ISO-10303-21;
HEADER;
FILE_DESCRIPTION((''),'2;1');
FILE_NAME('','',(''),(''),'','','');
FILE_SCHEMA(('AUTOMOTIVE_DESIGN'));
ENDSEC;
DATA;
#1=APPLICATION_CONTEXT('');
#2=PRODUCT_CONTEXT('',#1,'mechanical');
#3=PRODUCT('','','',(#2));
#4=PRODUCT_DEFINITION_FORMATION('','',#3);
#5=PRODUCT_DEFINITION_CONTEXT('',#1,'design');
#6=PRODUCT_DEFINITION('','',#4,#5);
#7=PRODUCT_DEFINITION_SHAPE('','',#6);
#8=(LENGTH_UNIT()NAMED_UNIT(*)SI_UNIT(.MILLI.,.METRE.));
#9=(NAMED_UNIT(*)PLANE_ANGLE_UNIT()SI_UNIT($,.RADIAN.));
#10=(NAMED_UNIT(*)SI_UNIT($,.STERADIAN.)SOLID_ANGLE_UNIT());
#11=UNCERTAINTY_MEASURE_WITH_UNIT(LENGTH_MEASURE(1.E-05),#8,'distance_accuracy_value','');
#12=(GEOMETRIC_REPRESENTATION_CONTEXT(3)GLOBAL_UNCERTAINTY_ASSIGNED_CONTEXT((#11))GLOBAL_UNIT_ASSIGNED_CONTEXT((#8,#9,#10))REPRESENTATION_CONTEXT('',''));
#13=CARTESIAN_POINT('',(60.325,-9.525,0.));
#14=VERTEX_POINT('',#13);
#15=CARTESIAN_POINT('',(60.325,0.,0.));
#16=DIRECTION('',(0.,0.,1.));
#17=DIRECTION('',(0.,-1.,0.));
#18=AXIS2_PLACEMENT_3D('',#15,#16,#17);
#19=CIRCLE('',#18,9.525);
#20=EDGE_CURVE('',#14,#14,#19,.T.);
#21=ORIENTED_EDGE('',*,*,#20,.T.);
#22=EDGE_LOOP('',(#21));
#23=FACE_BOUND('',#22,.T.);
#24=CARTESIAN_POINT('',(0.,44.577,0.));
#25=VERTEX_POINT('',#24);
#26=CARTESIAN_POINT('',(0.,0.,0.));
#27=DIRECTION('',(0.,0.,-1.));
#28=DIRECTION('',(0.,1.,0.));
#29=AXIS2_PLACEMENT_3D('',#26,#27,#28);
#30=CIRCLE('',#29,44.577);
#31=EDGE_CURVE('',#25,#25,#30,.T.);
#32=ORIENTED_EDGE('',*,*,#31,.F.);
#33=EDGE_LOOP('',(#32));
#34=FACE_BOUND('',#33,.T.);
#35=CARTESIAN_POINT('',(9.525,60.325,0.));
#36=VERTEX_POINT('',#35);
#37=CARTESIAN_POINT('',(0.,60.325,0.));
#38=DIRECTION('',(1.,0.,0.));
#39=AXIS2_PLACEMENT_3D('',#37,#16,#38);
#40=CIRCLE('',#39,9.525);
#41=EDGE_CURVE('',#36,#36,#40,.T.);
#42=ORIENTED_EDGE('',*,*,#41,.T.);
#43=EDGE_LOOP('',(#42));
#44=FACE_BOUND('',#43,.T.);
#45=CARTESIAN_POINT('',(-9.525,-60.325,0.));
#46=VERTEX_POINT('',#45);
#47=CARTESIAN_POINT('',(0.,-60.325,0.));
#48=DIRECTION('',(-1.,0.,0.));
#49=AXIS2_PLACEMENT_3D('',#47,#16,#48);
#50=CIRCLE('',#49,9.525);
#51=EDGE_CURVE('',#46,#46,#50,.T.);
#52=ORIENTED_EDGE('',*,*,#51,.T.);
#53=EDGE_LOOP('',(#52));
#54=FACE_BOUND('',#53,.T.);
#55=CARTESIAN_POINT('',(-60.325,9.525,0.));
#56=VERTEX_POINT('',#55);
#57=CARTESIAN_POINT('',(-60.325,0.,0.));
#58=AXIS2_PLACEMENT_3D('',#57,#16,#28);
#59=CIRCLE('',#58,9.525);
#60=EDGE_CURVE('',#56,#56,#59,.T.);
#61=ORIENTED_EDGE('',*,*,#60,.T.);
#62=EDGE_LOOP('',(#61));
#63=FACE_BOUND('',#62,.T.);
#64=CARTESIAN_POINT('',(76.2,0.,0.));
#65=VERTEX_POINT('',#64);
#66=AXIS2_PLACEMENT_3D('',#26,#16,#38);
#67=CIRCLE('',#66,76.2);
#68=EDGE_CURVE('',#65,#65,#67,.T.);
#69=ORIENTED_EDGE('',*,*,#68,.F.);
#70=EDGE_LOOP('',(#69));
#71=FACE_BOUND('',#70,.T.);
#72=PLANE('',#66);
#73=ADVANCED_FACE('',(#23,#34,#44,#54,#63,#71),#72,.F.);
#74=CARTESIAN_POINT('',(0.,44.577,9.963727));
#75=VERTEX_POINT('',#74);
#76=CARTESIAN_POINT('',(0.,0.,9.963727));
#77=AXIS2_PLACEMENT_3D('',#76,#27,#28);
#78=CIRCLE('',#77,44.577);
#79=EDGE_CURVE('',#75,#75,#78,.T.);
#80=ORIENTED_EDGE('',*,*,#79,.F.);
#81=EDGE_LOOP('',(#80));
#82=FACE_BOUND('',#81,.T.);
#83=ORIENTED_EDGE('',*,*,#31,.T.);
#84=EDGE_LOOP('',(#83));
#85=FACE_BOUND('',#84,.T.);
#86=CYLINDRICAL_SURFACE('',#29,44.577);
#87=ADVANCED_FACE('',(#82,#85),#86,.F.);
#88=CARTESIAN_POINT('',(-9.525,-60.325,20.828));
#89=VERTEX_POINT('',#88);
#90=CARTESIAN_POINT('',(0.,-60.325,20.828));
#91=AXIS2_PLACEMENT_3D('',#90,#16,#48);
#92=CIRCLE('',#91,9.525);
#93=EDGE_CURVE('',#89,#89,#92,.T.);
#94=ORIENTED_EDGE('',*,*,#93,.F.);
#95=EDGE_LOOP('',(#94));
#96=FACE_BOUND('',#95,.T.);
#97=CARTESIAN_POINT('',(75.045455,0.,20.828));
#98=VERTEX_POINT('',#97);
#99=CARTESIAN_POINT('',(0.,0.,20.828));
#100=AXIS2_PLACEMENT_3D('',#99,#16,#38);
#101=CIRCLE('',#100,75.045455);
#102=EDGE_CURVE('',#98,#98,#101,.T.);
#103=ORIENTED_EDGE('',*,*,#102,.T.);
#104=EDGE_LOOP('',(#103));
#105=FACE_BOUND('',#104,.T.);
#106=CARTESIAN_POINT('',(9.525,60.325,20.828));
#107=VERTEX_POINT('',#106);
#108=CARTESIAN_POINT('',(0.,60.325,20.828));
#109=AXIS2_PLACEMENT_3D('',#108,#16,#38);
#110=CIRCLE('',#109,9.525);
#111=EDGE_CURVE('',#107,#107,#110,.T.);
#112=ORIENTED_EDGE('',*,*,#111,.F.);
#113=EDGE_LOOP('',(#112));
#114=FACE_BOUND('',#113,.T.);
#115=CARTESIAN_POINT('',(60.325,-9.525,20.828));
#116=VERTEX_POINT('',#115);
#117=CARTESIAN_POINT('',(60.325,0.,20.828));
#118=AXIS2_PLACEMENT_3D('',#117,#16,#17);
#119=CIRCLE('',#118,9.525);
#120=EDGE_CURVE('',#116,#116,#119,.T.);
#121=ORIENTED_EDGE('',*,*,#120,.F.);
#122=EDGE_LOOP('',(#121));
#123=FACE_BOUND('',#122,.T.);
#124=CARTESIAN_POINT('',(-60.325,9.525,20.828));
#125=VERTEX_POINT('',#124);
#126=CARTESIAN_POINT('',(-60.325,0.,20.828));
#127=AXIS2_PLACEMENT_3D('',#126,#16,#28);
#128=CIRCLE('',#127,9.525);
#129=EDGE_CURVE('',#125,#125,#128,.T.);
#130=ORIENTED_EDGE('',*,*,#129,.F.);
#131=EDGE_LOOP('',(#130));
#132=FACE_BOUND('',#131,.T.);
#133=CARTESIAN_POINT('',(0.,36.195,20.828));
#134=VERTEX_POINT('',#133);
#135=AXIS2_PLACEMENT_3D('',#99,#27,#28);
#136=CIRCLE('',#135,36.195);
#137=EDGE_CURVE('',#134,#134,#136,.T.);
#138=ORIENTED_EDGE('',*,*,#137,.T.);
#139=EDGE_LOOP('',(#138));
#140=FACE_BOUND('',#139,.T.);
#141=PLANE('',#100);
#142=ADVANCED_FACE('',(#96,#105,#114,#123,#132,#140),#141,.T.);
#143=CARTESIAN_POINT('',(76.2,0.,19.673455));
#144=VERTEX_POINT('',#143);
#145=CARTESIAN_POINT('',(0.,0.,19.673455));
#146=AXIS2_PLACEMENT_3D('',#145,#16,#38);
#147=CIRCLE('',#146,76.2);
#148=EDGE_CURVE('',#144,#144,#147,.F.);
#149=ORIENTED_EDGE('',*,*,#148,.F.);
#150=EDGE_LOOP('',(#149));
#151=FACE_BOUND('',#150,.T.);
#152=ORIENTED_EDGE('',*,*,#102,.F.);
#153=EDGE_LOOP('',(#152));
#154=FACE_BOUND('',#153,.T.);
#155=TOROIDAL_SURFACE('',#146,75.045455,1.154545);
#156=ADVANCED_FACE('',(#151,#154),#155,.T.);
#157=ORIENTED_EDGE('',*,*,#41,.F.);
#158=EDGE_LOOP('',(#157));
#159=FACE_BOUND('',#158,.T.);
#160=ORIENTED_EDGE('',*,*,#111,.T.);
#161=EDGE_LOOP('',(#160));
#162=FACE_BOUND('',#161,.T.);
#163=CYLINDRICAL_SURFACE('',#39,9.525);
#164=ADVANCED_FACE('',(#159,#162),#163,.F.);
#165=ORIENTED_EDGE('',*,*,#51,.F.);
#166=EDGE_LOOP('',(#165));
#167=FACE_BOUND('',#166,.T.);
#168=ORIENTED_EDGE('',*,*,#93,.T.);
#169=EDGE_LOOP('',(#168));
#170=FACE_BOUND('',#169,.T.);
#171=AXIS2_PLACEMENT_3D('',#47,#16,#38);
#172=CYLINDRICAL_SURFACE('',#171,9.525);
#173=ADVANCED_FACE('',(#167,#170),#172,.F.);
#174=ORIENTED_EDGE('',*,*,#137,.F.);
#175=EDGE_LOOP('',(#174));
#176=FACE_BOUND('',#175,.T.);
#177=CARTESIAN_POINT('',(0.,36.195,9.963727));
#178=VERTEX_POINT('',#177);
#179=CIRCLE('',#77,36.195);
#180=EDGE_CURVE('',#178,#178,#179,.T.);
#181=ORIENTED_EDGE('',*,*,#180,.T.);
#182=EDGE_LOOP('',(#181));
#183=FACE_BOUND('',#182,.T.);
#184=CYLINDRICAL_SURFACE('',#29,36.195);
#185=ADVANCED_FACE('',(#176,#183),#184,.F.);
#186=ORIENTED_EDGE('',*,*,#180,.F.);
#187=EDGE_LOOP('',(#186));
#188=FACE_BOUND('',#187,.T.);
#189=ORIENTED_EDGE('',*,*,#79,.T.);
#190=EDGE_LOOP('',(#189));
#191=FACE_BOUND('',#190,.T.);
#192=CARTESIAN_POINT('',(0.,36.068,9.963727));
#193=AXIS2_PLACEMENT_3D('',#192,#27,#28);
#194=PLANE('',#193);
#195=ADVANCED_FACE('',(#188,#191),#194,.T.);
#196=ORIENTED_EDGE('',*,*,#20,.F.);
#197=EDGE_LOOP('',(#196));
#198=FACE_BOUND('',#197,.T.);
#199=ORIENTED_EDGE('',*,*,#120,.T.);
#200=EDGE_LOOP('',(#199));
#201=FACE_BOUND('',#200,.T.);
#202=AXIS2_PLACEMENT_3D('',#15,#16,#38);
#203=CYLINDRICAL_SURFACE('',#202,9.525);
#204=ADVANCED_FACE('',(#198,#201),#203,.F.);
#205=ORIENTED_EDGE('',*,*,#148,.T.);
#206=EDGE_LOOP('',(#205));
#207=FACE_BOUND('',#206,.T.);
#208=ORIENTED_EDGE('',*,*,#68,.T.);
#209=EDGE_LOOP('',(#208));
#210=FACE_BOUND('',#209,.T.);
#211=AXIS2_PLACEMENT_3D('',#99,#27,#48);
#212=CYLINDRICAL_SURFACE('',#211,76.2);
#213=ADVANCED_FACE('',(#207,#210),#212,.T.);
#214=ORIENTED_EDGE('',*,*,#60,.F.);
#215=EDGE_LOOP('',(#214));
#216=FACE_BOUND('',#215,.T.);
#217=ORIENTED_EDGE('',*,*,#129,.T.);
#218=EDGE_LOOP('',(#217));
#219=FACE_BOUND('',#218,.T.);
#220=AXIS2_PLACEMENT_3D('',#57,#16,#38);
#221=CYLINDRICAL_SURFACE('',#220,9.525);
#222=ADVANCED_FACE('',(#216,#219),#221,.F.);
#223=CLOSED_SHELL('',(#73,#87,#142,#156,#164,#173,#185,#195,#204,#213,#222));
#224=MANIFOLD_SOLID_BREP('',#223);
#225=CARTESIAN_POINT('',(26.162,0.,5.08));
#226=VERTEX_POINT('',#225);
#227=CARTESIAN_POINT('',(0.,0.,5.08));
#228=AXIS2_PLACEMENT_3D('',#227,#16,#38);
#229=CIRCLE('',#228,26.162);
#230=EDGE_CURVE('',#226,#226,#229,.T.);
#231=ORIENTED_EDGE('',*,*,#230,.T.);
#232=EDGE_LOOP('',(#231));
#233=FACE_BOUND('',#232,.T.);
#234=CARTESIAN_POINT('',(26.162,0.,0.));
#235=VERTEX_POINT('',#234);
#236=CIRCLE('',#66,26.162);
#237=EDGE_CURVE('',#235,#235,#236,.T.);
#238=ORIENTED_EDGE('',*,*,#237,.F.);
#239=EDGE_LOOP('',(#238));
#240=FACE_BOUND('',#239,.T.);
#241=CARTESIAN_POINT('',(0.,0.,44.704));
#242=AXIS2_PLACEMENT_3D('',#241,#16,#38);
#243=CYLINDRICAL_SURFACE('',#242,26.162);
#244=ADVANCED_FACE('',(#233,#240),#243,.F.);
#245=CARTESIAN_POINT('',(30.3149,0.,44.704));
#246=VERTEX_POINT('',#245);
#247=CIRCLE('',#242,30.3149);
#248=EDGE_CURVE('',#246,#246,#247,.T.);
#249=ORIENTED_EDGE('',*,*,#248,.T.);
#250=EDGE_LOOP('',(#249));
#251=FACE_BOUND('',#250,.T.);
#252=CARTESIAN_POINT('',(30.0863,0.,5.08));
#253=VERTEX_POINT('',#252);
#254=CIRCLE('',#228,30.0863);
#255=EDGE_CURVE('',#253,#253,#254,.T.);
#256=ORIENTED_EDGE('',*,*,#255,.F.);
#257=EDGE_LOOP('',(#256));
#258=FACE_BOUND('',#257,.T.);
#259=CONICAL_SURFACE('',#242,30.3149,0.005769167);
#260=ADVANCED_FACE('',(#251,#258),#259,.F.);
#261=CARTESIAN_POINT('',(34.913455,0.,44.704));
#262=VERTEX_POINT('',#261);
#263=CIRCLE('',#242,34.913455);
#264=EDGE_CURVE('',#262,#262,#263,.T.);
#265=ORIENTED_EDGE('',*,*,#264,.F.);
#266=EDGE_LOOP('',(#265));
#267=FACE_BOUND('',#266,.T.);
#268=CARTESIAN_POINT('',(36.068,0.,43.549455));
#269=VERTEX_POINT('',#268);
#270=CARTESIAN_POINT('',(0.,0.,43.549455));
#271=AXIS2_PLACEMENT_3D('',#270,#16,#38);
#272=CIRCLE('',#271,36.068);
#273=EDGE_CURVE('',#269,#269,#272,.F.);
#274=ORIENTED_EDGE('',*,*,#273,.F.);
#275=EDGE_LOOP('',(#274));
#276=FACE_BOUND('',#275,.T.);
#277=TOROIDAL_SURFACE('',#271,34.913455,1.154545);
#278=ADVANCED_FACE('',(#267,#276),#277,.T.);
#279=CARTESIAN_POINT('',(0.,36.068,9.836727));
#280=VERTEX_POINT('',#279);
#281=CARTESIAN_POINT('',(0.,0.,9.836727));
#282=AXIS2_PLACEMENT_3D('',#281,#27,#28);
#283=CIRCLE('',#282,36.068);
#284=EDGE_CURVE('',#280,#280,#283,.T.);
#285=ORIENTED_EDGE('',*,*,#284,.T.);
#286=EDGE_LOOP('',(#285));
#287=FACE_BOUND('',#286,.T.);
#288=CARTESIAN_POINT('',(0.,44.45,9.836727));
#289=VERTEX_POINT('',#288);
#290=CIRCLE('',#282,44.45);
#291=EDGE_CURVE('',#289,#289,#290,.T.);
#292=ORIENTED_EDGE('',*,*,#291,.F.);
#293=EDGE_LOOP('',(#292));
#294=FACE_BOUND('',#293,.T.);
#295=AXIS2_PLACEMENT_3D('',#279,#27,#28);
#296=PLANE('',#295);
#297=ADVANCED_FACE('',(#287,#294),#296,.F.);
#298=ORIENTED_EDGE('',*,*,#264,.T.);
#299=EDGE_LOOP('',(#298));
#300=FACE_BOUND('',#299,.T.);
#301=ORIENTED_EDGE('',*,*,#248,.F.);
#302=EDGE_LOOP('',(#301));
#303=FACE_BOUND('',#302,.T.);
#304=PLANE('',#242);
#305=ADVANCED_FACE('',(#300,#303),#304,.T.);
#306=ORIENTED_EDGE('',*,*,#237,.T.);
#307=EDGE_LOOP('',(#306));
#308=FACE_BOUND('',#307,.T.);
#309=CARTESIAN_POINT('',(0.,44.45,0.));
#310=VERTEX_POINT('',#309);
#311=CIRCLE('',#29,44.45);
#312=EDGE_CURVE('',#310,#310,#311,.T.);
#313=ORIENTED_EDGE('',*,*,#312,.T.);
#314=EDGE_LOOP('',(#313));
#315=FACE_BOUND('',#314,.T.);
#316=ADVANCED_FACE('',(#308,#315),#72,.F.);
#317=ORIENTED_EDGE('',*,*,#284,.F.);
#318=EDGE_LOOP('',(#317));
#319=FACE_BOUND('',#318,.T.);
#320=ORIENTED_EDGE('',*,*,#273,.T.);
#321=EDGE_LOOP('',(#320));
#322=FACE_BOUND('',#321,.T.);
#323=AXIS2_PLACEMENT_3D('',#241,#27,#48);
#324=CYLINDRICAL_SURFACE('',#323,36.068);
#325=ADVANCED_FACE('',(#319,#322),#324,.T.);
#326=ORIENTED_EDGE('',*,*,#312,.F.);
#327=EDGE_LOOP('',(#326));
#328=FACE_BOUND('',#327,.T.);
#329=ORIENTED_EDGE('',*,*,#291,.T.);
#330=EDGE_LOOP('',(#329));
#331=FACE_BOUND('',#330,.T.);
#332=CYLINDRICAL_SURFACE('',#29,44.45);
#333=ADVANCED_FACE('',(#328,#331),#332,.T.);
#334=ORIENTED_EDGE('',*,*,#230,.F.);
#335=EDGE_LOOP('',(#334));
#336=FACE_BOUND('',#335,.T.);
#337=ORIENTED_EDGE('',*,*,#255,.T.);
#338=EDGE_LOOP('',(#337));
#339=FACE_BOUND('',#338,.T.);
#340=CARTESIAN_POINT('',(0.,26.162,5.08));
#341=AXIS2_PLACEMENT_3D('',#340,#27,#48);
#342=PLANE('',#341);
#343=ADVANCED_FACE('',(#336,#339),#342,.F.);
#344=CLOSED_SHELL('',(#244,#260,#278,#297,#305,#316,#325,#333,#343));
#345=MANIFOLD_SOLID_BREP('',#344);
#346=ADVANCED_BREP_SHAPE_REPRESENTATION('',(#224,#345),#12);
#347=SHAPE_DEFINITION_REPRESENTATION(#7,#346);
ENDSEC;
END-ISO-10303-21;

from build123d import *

# Parameters (mm, degrees)
SKETCH1_R                       = 76.2
EXTRUDE1_DEPTH                  = 20.828
SKETCH2_R                       = 36.068
EXTRUDE2_DEPTH                  = 23.876
SKETCH3_R                       = 9.525
EXTRUDE3_DEPTH                  = 111.376371457
CIRPATTERN1_COUNT               = 4
FILLET1_R                       = 1.154545455
CUT_REVOLVE_THIN1_OUTLINE_R     = 44.577
CUT_REVOLVE_THIN1_OUTLINE_R_2   = 44.45
CUT_REVOLVE_THIN1_DEPTH         = 9.963727273
CUT_REVOLVE_THIN1_START         = 9.836727273
CUT_REVOLVE_THIN1_2_OUTLINE_R   = 36.195
CUT_REVOLVE_THIN1_2_OUTLINE_R_2 = 36.068
CUT_REVOLVE_THIN1_2_DEPTH       = 10.991272727
CUT_REVOLVE_THIN1_3_OUTLINE_R   = 44.45
CUT_REVOLVE_THIN1_3_OUTLINE_R_2 = 36.195
CUT_REVOLVE_THIN1_3_DEPTH       = 0.127


# Read off the part's stored shape, not the designer's step: Cut-Revolve-Thin1
with BuildPart() as part:
    # Sketch1 → Extrude1 (new body)
    with BuildSketch(Plane.XY):
        Circle(SKETCH1_R)
    extrude(amount=EXTRUDE1_DEPTH)

    # Sketch2 → Extrude2 (add)
    with BuildSketch(Plane.XY.offset(20.828)):
        Circle(SKETCH2_R)
    extrude(amount=EXTRUDE2_DEPTH)

    # Sketch3 → Extrude3 (cut, through all)
    with BuildSketch(Plane.XY.offset(20.828)):
        with Locations((0, 60.325)):
            Circle(SKETCH3_R)
    extrude3 = extrude(amount=-EXTRUDE3_DEPTH, mode=Mode.SUBTRACT)

    # CirPattern1: Extrude3 ×4 about axis
    cirpattern1_axis = Axis((0, 0, 0), (0, 0, 1))
    for i in range(1, CIRPATTERN1_COUNT):
        add(extrude3.rotate(cirpattern1_axis, i * 360 / CIRPATTERN1_COUNT), mode=Mode.SUBTRACT)

    # Fillet1
    fillet1_edges = [part.edges().sort_by_distance(p)[0] for p in [
        (-76.2, 0, 20.828),
        (-36.068, 0, 44.704),
    ]]
    fillet(fillet1_edges, radius=FILLET1_R)

    # Sketch4 → Cut-Revolve1 (revolve, cut)
    with BuildSketch(Plane(origin=(0, 0, 62.70625), x_dir=(0, 0, 1), z_dir=(-1, 0, 0)), mode=Mode.PRIVATE) as cut_revolve1_sk:
        Polygon((-62.70625, 26.162), (-57.62625, 26.162), (-57.62625, 30.0863), (-18.00225, 30.3149), (-18.00225, 0), (-62.70625, 0), align=None)
    revolve(cut_revolve1_sk.sketch.rotate(Axis((0, 0, 44.704), (0, 0, -1)), 90), axis=Axis((0, 0, 44.704), (0, 0, -1)), mode=Mode.SUBTRACT)

    # Cut-Revolve-Thin1 outline → Cut-Revolve-Thin1 (cut)
    with BuildSketch(Plane.XY):
        Circle(CUT_REVOLVE_THIN1_OUTLINE_R)
        Circle(CUT_REVOLVE_THIN1_OUTLINE_R_2, mode=Mode.SUBTRACT)
    extrude(amount=CUT_REVOLVE_THIN1_DEPTH, mode=Mode.SUBTRACT)

    # Cut-Revolve-Thin1 2 outline → Cut-Revolve-Thin1 2 (cut)
    with BuildSketch(Plane.XY.offset(CUT_REVOLVE_THIN1_START)):
        Circle(CUT_REVOLVE_THIN1_2_OUTLINE_R)
        Circle(CUT_REVOLVE_THIN1_2_OUTLINE_R_2, mode=Mode.SUBTRACT)
    extrude(amount=CUT_REVOLVE_THIN1_2_DEPTH, mode=Mode.SUBTRACT)

    # Cut-Revolve-Thin1 3 outline → Cut-Revolve-Thin1 3 (cut)
    with BuildSketch(Plane.XY.offset(CUT_REVOLVE_THIN1_START)):
        Circle(CUT_REVOLVE_THIN1_3_OUTLINE_R)
        Circle(CUT_REVOLVE_THIN1_3_OUTLINE_R_2, mode=Mode.SUBTRACT)
    extrude(amount=CUT_REVOLVE_THIN1_3_DEPTH, mode=Mode.SUBTRACT)


solid = part.part
